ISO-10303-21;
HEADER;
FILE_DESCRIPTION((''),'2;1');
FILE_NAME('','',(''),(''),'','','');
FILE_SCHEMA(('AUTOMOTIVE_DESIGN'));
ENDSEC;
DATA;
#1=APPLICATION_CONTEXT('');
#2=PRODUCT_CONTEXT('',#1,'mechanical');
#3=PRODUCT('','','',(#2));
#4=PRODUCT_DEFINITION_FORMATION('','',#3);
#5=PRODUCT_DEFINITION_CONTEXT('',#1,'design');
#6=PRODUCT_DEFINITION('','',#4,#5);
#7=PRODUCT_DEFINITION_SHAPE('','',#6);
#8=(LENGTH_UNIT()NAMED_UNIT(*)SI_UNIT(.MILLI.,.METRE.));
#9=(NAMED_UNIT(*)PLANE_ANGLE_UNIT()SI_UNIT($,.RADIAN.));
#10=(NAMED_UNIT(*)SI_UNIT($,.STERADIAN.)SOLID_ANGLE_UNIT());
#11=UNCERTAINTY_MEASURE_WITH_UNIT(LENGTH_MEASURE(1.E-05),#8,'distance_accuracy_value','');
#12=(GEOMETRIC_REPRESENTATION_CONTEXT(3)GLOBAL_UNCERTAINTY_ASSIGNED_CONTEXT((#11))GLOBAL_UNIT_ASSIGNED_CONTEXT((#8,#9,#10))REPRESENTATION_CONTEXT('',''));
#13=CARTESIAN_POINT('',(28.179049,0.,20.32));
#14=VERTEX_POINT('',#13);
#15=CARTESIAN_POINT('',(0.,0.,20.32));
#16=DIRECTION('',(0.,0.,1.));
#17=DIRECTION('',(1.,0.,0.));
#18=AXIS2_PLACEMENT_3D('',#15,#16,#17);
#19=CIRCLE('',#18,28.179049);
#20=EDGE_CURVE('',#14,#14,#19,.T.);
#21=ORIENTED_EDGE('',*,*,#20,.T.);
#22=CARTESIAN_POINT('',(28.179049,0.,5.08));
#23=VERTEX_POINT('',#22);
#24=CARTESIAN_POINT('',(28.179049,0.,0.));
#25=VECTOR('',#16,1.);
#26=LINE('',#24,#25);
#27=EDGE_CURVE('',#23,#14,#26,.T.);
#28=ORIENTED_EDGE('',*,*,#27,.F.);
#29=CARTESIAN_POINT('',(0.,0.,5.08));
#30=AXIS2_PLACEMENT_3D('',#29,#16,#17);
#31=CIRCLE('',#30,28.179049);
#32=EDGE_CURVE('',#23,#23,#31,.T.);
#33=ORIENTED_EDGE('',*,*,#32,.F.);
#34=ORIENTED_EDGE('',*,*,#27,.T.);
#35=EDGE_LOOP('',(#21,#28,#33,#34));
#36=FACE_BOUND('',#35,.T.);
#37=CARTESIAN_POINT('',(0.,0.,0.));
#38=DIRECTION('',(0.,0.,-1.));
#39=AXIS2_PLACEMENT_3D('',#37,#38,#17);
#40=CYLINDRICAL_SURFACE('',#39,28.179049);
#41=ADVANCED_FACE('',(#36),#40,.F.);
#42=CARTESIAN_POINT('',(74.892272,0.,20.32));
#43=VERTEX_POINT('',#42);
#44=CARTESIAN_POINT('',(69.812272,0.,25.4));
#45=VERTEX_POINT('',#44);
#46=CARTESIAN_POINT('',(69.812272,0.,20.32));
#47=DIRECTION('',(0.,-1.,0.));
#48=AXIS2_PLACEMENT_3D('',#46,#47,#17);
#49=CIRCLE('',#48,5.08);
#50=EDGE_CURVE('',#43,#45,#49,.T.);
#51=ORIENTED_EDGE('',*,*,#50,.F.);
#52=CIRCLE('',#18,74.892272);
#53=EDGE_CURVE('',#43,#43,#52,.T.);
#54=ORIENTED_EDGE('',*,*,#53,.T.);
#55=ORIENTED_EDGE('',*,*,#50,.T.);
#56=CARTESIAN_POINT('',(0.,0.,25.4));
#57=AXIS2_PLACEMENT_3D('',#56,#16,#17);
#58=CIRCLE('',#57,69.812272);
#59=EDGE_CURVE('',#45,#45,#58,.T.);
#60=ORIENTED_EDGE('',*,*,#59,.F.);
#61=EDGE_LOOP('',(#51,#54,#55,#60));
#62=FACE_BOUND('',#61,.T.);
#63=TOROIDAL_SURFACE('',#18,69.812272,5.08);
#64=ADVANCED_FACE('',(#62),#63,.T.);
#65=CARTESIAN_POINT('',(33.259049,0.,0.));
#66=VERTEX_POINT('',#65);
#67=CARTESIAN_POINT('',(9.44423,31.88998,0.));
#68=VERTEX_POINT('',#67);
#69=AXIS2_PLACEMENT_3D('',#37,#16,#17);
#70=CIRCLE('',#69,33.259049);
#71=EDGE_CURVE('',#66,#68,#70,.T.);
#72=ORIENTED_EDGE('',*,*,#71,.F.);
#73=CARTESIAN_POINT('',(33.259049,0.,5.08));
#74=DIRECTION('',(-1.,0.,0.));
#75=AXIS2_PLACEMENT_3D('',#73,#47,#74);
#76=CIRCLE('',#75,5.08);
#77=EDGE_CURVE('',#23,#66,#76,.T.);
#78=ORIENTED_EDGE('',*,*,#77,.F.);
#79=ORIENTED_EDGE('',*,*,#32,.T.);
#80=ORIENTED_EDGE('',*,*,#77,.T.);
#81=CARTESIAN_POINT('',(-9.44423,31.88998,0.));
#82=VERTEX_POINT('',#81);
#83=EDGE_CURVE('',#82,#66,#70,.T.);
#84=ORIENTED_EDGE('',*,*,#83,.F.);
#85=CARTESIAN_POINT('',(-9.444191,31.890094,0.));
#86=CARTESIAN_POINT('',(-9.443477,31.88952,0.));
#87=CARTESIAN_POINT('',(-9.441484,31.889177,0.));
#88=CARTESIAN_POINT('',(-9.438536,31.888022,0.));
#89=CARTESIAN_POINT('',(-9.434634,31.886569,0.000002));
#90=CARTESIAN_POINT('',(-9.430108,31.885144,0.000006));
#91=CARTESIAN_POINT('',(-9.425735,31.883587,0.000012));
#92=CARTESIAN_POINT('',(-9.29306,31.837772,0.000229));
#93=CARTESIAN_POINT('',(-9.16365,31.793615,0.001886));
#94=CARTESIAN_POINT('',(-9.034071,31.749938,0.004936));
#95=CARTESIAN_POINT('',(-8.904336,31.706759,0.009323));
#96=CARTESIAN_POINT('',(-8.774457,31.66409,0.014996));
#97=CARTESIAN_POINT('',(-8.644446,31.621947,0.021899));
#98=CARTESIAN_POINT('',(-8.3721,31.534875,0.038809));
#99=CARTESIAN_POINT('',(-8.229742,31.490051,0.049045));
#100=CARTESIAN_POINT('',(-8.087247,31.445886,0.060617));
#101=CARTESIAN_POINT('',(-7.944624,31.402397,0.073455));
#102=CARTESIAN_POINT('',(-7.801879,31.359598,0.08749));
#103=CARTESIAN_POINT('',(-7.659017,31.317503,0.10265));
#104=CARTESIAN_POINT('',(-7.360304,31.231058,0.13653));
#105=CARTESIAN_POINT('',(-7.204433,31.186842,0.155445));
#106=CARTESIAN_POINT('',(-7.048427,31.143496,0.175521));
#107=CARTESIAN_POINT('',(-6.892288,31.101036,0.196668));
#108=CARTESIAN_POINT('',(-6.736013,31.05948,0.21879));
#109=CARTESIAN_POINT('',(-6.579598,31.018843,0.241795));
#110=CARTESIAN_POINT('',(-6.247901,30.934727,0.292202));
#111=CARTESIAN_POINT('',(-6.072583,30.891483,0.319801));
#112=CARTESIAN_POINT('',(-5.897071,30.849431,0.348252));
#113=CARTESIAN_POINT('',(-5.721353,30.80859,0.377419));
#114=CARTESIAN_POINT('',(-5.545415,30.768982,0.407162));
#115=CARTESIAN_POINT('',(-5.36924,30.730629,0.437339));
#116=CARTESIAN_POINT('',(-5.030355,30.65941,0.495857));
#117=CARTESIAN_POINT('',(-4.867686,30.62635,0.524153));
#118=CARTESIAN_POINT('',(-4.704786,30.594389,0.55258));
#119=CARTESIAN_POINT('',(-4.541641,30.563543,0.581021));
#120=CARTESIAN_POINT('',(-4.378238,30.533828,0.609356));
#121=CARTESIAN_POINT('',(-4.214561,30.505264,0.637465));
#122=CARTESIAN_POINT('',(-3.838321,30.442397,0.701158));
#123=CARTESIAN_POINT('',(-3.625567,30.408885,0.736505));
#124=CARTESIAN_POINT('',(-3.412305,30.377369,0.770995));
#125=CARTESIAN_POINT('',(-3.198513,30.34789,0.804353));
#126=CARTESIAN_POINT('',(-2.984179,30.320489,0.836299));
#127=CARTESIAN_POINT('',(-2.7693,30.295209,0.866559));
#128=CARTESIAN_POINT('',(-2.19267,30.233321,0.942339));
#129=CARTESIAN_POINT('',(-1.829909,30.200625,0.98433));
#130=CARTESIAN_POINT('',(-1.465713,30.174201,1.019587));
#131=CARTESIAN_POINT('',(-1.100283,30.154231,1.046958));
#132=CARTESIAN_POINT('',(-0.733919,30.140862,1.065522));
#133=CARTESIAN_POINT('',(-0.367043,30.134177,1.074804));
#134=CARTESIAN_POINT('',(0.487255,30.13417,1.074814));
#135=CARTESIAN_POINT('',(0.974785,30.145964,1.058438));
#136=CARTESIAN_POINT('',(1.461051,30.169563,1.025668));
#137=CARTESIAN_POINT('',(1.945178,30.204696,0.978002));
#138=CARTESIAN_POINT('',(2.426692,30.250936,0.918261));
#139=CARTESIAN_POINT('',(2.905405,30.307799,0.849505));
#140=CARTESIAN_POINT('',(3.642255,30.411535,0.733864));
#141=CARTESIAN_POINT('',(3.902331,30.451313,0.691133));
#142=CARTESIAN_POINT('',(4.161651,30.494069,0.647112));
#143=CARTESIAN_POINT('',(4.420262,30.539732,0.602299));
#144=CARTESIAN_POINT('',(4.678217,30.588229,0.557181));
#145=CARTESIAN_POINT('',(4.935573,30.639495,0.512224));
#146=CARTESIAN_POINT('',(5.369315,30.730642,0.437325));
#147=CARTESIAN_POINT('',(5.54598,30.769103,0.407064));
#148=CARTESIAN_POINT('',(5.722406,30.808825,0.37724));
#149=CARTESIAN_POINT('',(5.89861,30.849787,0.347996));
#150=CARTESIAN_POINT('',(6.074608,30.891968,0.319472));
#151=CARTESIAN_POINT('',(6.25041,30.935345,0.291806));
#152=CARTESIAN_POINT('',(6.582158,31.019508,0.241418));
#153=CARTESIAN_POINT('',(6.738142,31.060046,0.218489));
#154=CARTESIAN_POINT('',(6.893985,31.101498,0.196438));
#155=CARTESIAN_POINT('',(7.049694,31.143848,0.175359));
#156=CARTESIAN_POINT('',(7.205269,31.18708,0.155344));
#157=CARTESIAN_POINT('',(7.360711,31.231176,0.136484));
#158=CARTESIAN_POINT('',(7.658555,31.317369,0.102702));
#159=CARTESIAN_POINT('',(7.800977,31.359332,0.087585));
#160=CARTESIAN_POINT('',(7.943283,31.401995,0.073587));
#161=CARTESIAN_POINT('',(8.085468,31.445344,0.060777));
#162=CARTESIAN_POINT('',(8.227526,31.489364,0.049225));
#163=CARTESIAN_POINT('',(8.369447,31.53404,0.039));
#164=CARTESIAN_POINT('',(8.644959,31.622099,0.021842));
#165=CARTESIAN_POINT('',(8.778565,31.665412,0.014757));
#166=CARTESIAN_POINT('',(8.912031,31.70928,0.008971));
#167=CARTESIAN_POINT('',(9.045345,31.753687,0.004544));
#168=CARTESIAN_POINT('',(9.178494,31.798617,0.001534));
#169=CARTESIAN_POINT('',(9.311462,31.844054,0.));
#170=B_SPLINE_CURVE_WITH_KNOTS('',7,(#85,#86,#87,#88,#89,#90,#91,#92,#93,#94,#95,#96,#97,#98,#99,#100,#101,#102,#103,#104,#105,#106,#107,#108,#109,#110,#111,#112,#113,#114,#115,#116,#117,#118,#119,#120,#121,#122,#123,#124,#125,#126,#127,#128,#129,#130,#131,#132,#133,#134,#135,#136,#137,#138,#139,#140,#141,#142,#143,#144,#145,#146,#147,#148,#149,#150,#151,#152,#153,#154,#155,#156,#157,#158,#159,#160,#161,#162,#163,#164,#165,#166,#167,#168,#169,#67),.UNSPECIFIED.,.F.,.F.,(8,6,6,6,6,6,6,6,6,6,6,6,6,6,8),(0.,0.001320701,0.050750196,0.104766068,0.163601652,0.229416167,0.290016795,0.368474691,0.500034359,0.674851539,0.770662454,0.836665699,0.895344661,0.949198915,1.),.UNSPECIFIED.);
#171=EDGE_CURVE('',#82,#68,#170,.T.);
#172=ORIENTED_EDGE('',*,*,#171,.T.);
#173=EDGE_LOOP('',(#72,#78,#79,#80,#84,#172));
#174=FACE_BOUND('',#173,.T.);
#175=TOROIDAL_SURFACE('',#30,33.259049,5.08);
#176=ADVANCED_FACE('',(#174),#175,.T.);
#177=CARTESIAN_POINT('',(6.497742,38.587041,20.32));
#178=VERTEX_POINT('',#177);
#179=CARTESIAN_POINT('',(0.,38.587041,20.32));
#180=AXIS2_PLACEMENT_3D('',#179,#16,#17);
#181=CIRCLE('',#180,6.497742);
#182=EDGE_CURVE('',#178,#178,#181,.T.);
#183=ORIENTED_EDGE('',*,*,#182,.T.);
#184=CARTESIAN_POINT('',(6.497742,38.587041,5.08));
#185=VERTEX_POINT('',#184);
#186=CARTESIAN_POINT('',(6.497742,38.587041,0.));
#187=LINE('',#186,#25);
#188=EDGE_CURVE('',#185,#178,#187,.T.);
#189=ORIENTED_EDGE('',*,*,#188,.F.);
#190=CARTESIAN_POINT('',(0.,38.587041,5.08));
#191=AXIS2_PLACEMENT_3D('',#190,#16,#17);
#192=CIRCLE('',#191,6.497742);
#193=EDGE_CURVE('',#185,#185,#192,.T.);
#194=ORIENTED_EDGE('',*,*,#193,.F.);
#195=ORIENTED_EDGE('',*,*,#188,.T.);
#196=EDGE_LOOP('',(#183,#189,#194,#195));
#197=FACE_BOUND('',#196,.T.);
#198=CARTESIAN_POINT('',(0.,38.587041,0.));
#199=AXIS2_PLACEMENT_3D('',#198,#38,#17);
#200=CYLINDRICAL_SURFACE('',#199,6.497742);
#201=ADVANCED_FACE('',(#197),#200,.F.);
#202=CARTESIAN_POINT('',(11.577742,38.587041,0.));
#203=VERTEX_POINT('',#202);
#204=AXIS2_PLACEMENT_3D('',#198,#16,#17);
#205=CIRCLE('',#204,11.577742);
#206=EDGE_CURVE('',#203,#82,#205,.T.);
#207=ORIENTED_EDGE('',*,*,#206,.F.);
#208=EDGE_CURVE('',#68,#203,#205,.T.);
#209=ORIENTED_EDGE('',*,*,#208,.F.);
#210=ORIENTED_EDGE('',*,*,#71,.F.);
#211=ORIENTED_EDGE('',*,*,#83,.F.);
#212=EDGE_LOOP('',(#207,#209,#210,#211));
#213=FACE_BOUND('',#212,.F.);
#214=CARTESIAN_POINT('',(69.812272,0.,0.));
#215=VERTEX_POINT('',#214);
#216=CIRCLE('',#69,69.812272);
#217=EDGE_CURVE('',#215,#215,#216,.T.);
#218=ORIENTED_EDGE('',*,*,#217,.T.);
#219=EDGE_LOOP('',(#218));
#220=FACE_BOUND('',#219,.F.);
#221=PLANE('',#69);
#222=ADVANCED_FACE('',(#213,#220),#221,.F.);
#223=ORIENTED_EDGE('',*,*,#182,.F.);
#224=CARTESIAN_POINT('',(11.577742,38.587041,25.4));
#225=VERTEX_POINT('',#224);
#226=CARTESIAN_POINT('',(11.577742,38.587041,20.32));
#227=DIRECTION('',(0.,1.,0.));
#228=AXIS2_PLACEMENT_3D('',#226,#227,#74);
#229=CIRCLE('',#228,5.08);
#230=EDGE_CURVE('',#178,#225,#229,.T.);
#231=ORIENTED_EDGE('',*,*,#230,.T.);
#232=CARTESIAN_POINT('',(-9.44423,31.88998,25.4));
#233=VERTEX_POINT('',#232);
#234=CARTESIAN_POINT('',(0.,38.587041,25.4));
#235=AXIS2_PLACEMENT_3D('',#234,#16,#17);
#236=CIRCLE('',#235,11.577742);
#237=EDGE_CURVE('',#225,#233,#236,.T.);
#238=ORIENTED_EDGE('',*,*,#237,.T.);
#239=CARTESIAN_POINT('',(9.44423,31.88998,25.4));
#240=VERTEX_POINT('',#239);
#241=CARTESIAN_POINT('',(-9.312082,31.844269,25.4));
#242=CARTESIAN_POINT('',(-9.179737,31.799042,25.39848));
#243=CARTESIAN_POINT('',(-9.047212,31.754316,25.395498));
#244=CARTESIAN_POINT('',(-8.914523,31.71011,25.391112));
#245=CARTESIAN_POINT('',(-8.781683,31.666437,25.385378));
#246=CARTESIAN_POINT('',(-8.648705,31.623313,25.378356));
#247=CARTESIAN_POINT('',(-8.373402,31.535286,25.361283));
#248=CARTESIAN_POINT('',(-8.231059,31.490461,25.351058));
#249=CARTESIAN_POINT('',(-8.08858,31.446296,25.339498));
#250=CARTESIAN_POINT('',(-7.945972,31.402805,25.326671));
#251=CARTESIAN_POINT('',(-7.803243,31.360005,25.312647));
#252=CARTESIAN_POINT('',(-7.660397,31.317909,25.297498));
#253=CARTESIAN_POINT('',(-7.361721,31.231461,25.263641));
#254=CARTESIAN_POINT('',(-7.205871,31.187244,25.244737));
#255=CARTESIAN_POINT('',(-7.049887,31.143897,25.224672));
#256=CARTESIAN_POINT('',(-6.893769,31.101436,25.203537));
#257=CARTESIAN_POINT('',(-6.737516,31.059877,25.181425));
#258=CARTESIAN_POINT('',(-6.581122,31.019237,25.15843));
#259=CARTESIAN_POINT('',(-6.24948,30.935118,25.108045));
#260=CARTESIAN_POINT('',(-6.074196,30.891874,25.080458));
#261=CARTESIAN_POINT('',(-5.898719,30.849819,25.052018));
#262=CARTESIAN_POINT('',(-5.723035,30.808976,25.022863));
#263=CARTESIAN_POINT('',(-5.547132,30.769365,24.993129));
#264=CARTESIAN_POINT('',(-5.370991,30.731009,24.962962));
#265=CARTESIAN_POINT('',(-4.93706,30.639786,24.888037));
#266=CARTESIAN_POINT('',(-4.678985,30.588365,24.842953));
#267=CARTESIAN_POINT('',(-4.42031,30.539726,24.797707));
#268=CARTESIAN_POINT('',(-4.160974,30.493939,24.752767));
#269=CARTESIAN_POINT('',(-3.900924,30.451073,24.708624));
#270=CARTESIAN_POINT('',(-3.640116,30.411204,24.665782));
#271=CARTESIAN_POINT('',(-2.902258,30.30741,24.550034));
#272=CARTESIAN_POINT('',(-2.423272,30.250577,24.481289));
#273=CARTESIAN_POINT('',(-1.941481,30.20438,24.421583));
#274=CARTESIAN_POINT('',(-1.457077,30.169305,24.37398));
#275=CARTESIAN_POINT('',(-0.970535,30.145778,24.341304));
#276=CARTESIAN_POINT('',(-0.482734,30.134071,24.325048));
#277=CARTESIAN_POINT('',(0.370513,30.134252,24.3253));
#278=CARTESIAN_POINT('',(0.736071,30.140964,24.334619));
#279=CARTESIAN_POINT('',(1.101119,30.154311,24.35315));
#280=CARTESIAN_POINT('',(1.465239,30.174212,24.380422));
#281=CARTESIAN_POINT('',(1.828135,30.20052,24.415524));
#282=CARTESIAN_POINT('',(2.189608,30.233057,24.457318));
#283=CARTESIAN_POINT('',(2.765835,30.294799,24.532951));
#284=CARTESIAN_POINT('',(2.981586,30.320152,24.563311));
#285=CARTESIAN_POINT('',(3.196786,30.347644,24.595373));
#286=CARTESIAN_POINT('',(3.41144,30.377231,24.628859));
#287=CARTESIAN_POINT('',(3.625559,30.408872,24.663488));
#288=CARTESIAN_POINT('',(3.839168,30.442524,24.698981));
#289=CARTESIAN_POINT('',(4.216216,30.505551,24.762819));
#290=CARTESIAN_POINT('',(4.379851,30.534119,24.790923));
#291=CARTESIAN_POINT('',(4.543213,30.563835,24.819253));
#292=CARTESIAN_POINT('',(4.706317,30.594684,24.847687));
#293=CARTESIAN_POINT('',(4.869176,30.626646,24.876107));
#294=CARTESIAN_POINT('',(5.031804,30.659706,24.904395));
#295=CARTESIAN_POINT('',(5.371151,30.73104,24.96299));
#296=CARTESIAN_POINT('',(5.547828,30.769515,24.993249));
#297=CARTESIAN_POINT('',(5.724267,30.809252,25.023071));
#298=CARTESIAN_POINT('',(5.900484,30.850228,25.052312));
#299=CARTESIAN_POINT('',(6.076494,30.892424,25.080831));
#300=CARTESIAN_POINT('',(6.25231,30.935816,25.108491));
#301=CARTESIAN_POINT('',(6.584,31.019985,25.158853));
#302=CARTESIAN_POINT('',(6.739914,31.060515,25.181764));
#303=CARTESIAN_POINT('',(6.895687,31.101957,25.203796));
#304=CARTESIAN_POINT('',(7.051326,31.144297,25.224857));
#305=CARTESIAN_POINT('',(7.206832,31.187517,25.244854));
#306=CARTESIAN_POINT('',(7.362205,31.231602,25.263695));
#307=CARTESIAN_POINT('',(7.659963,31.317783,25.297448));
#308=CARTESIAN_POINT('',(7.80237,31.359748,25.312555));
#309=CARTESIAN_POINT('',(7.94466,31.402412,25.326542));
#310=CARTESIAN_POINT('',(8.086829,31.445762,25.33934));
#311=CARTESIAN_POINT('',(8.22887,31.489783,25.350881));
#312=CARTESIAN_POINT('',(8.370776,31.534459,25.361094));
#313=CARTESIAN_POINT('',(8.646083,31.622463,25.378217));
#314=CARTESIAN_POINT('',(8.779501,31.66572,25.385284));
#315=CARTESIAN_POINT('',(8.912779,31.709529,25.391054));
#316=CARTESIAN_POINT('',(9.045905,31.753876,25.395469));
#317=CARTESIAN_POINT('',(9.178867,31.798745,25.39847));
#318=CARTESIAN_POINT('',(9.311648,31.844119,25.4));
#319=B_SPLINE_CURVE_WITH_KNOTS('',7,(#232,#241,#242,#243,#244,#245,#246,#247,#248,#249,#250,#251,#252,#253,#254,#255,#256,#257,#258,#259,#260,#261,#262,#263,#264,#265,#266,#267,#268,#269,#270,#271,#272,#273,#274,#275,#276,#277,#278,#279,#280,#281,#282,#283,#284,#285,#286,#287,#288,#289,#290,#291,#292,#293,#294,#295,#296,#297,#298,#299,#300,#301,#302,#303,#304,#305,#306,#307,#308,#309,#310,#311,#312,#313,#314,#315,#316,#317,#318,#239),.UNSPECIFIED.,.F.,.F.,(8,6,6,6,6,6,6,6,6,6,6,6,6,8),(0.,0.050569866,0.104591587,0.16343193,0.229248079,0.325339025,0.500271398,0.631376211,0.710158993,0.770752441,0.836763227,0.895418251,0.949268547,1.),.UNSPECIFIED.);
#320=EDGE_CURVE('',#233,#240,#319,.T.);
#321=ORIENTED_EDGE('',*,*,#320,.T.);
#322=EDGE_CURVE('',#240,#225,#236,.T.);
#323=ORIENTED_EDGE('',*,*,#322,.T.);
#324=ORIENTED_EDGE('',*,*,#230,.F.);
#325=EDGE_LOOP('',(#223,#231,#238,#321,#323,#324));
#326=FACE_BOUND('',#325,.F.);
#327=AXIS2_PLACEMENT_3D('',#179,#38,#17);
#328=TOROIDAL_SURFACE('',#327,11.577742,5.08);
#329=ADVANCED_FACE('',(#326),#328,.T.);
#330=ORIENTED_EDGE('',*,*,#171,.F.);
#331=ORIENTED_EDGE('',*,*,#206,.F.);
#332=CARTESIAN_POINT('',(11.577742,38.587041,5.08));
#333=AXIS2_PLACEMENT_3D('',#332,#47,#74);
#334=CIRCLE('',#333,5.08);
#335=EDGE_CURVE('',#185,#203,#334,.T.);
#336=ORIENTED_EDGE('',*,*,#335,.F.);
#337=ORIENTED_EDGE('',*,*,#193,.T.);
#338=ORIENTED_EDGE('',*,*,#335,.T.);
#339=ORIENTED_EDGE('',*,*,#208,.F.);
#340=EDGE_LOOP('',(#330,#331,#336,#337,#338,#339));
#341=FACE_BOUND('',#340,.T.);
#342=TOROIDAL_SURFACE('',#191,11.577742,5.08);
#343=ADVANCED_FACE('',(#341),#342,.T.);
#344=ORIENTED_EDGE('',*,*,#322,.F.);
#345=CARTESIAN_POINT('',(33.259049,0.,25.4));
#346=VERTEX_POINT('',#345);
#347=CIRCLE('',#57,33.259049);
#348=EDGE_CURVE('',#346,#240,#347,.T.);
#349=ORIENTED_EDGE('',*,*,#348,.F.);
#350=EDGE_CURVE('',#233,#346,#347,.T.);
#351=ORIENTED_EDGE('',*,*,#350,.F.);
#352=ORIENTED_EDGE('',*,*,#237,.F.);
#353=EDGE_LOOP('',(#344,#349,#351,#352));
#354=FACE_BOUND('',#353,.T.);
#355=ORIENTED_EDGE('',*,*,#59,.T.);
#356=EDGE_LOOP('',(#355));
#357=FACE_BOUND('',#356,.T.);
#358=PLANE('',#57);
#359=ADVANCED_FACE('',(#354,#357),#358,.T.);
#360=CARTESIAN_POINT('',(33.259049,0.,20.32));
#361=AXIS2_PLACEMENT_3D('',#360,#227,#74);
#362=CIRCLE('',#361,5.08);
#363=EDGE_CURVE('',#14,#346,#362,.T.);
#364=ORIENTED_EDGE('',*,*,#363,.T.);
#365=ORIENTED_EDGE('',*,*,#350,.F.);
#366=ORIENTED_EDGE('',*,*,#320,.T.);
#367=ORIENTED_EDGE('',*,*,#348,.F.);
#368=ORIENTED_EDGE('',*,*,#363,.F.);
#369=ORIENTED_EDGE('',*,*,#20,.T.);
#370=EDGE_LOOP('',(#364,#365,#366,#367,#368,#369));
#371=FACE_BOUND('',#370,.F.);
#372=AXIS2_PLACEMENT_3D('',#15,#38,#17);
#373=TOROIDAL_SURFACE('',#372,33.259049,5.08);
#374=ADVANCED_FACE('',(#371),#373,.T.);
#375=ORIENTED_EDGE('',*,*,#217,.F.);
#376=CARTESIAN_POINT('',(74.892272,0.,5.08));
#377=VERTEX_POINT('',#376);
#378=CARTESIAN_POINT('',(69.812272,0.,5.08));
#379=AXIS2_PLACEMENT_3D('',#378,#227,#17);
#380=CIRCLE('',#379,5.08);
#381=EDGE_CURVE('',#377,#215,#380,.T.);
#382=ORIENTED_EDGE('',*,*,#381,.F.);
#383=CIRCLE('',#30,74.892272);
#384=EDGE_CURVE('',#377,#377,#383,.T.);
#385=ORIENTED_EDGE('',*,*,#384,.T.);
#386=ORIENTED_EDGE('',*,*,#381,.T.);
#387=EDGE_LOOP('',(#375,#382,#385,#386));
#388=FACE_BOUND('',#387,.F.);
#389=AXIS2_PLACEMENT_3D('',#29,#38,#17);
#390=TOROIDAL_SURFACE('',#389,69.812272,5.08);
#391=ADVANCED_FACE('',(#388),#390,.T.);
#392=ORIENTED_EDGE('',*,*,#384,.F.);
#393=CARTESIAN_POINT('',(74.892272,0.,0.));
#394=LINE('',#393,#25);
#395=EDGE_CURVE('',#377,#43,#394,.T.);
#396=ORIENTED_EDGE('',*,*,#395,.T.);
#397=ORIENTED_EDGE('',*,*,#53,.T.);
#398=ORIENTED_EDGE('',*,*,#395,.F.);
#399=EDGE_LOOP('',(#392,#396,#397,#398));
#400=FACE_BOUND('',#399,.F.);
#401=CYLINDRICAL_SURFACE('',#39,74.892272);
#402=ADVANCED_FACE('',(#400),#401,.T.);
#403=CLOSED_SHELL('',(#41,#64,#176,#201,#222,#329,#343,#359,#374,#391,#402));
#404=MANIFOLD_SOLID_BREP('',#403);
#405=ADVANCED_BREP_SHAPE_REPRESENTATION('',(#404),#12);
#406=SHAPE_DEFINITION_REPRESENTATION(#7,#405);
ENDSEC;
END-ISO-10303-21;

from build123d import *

# Parameters (mm, degrees)
F0_R     = 74.892271749
F0_R_2   = 28.179048931
F0_R_3   = 6.4977417518
F1_DEPTH = 25.4


# Not quite as in the source:
# - a fillet or chamfer that OpenCascade refuses, or shapes differently, is made with other operations: its cross-section is extruded or revolved along the edge and cut away or added


with BuildPart() as f1:
    # F0 (on Top) → F1 (new body)
    with BuildSketch(Plane.XY):
        Circle(F0_R)
        Circle(F0_R_2, mode=Mode.SUBTRACT)
        with Locations((0, 38.5870411992)):
            Circle(F0_R_3, mode=Mode.SUBTRACT)
    extrude(amount=F1_DEPTH)

    # F2: fillet of radius 5.08 on 7 edges, made by hand

    # F2_s1 → F2_t2 (revolve, cut)
    with BuildSketch(Plane.XZ):
        with BuildLine():
            ThreePointArc((74.892271749, 20.32), (73.4043741975, 23.9121024484), (69.812271749, 25.4))
            Line((69.812271749, 25.4), (69.812271749, 25.5016))
            Line((69.812271749, 25.5016), (74.993871749, 25.5016))
            Line((74.993871749, 25.5016), (74.993871749, 20.32))
            Line((74.993871749, 20.32), (74.892271749, 20.32))
        make_face()
    revolve(axis=Axis((0, 0, 25.4), (0, 0, 1)), mode=Mode.SUBTRACT)

    # F2_s3 → F2_t4 (revolve, cut)
    with BuildSketch(Plane.XZ):
        with BuildLine():
            ThreePointArc((28.179048931, 20.32), (29.6669464826, 23.9121024484), (33.259048931, 25.4))
            Line((33.259048931, 25.4), (33.259048931, 25.5016))
            Line((33.259048931, 25.5016), (28.077448931, 25.5016))
            Line((28.077448931, 25.5016), (28.077448931, 20.32))
            Line((28.077448931, 20.32), (28.179048931, 20.32))
        make_face()
    revolve(axis=Axis((0, 0, 25.4), (0, 0, 1)), mode=Mode.SUBTRACT)

    # F2_s5 → F2_t6 (revolve, cut)
    with BuildSketch(Plane.XZ.offset(-38.5870411992)):
        with BuildLine():
            ThreePointArc((6.4977417518, 20.32), (7.9856393033, 23.9121024484), (11.5777417518, 25.4))
            Line((11.5777417518, 25.4), (11.5777417518, 25.5016))
            Line((11.5777417518, 25.5016), (6.3961417518, 25.5016))
            Line((6.3961417518, 25.5016), (6.3961417518, 20.32))
            Line((6.3961417518, 20.32), (6.4977417518, 20.32))
        make_face()
    revolve(axis=Axis((0, 38.5870411992, 25.4), (0, 0, 1)), mode=Mode.SUBTRACT)

    # F2_s7 → F2_t8 (revolve, cut)
    with BuildSketch(Plane.XZ.offset(-38.5870411992)):
        with BuildLine():
            ThreePointArc((6.4977417518, 5.08), (7.9856393033, 1.4878975516), (11.5777417518, 0))
            Line((11.5777417518, 0), (11.5777417518, -0.1016))
            Line((11.5777417518, -0.1016), (6.3961417518, -0.1016))
            Line((6.3961417518, -0.1016), (6.3961417518, 5.08))
            Line((6.3961417518, 5.08), (6.4977417518, 5.08))
        make_face()
    revolve(axis=Axis((0, 38.5870411992, 0), (0, 0, 1)), mode=Mode.SUBTRACT)

    # F2_s9 → F2_t10 (revolve, cut)
    with BuildSketch(Plane.XZ):
        with BuildLine():
            ThreePointArc((28.179048931, 5.08), (29.6669464826, 1.4878975516), (33.259048931, 0))
            Line((33.259048931, 0), (33.259048931, -0.1016))
            Line((33.259048931, -0.1016), (28.077448931, -0.1016))
            Line((28.077448931, -0.1016), (28.077448931, 5.08))
            Line((28.077448931, 5.08), (28.179048931, 5.08))
        make_face()
    revolve(axis=Axis((0, 0, 0), (0, 0, 1)), mode=Mode.SUBTRACT)

    # F2_s11 → F2_t12 (revolve, cut)
    with BuildSketch(Plane.XZ):
        with BuildLine():
            ThreePointArc((74.892271749, 5.08), (73.4043741975, 1.4878975516), (69.812271749, 0))
            Line((69.812271749, 0), (69.812271749, -0.1016))
            Line((69.812271749, -0.1016), (74.993871749, -0.1016))
            Line((74.993871749, -0.1016), (74.993871749, 5.08))
            Line((74.993871749, 5.08), (74.892271749, 5.08))
        make_face()
    revolve(axis=Axis((0, 0, 0), (0, 0, 1)), mode=Mode.SUBTRACT)


solid = f1.part
